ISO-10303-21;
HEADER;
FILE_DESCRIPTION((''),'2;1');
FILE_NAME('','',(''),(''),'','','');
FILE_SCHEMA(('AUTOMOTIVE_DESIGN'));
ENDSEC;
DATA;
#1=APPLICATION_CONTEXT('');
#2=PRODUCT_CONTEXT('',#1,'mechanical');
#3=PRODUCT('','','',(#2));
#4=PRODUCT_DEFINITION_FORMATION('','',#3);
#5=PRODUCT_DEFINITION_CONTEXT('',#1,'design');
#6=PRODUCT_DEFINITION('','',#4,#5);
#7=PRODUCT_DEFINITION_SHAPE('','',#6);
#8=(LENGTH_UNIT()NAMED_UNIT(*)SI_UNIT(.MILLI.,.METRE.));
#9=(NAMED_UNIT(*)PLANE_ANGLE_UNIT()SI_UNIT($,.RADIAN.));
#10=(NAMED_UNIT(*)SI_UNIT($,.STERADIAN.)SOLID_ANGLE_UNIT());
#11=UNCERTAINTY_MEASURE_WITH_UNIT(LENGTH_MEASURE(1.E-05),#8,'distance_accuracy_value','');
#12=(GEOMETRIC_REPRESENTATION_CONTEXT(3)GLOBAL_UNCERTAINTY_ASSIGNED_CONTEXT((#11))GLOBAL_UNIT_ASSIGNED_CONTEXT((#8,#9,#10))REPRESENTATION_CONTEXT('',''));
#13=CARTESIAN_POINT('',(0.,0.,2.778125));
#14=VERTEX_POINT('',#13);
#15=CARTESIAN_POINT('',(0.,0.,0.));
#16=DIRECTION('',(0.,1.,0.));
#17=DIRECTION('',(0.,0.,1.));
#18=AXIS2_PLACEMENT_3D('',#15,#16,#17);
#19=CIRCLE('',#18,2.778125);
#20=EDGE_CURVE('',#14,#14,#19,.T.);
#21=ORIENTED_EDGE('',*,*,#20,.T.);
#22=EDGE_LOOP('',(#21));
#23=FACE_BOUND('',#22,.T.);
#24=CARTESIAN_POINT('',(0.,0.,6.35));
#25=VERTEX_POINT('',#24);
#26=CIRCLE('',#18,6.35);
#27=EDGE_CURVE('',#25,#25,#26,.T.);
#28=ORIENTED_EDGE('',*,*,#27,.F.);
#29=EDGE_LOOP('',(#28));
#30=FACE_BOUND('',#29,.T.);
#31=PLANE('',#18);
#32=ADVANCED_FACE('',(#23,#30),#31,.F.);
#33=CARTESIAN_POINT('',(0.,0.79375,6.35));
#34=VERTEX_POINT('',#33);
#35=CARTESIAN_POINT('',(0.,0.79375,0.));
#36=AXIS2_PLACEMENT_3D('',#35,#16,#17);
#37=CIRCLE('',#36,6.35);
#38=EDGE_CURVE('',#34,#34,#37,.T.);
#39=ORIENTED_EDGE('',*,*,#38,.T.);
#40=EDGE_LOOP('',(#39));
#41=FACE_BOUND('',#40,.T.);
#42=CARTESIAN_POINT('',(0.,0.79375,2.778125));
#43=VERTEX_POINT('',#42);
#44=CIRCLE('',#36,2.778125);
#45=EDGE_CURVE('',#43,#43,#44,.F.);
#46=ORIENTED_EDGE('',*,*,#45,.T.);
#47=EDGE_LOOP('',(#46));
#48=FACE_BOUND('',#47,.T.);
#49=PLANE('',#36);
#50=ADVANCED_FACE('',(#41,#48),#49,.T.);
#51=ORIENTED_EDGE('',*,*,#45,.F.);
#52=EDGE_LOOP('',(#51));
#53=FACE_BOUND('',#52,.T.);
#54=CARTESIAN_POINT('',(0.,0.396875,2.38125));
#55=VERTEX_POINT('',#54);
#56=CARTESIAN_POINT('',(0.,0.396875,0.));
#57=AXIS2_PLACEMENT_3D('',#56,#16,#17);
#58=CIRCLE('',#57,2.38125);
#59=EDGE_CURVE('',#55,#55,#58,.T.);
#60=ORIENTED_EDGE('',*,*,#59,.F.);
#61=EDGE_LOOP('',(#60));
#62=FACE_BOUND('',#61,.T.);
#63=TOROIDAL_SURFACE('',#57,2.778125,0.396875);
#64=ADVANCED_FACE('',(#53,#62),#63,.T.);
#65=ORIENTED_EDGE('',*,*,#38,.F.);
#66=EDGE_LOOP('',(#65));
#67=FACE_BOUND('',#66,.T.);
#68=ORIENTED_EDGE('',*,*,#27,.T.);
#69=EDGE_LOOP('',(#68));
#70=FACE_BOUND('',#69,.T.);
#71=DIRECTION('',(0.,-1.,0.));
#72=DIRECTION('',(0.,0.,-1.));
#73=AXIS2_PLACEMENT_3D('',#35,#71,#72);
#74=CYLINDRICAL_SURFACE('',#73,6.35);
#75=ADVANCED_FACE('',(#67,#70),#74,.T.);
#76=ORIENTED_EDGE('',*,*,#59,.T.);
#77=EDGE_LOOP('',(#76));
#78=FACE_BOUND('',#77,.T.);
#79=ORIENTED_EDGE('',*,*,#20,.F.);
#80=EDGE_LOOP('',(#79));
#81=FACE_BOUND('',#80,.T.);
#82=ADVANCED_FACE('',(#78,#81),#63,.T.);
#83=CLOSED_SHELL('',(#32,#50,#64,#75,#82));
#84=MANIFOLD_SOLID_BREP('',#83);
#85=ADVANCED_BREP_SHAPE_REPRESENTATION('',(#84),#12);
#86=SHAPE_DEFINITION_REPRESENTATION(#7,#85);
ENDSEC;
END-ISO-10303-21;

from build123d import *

# Parameters (mm, degrees)
SKETCH1_R           = 6.35
SKETCH1_R_2         = 2.38125
BOSS_EXTRUDE1_DEPTH = 0.79375
FILLET1_R           = 0.396875


with BuildPart() as part:
    # Sketch1 → Boss-Extrude1 (new body)
    with BuildSketch(Plane(origin=(0, 0, 0), x_dir=(1, 0, 0), z_dir=(0, 1, 0))):
        with Locations(Location((0, 0, 0), (0, 0, 270))):
            Circle(SKETCH1_R)
        with Locations(Location((0, 0, 0), (0, 0, 270))):
            Circle(SKETCH1_R_2, mode=Mode.SUBTRACT)
    extrude(amount=BOSS_EXTRUDE1_DEPTH)

    # Fillet1
    fillet1_edges = [part.edges().sort_by_distance(p)[0] for p in [
        (0, 0, -2.38125),
        (0, 0.79375, -2.38125),
    ]]
    fillet(fillet1_edges, radius=FILLET1_R - 0.0001)  # a hair under: the kernel refuses the full size


solid = part.part
